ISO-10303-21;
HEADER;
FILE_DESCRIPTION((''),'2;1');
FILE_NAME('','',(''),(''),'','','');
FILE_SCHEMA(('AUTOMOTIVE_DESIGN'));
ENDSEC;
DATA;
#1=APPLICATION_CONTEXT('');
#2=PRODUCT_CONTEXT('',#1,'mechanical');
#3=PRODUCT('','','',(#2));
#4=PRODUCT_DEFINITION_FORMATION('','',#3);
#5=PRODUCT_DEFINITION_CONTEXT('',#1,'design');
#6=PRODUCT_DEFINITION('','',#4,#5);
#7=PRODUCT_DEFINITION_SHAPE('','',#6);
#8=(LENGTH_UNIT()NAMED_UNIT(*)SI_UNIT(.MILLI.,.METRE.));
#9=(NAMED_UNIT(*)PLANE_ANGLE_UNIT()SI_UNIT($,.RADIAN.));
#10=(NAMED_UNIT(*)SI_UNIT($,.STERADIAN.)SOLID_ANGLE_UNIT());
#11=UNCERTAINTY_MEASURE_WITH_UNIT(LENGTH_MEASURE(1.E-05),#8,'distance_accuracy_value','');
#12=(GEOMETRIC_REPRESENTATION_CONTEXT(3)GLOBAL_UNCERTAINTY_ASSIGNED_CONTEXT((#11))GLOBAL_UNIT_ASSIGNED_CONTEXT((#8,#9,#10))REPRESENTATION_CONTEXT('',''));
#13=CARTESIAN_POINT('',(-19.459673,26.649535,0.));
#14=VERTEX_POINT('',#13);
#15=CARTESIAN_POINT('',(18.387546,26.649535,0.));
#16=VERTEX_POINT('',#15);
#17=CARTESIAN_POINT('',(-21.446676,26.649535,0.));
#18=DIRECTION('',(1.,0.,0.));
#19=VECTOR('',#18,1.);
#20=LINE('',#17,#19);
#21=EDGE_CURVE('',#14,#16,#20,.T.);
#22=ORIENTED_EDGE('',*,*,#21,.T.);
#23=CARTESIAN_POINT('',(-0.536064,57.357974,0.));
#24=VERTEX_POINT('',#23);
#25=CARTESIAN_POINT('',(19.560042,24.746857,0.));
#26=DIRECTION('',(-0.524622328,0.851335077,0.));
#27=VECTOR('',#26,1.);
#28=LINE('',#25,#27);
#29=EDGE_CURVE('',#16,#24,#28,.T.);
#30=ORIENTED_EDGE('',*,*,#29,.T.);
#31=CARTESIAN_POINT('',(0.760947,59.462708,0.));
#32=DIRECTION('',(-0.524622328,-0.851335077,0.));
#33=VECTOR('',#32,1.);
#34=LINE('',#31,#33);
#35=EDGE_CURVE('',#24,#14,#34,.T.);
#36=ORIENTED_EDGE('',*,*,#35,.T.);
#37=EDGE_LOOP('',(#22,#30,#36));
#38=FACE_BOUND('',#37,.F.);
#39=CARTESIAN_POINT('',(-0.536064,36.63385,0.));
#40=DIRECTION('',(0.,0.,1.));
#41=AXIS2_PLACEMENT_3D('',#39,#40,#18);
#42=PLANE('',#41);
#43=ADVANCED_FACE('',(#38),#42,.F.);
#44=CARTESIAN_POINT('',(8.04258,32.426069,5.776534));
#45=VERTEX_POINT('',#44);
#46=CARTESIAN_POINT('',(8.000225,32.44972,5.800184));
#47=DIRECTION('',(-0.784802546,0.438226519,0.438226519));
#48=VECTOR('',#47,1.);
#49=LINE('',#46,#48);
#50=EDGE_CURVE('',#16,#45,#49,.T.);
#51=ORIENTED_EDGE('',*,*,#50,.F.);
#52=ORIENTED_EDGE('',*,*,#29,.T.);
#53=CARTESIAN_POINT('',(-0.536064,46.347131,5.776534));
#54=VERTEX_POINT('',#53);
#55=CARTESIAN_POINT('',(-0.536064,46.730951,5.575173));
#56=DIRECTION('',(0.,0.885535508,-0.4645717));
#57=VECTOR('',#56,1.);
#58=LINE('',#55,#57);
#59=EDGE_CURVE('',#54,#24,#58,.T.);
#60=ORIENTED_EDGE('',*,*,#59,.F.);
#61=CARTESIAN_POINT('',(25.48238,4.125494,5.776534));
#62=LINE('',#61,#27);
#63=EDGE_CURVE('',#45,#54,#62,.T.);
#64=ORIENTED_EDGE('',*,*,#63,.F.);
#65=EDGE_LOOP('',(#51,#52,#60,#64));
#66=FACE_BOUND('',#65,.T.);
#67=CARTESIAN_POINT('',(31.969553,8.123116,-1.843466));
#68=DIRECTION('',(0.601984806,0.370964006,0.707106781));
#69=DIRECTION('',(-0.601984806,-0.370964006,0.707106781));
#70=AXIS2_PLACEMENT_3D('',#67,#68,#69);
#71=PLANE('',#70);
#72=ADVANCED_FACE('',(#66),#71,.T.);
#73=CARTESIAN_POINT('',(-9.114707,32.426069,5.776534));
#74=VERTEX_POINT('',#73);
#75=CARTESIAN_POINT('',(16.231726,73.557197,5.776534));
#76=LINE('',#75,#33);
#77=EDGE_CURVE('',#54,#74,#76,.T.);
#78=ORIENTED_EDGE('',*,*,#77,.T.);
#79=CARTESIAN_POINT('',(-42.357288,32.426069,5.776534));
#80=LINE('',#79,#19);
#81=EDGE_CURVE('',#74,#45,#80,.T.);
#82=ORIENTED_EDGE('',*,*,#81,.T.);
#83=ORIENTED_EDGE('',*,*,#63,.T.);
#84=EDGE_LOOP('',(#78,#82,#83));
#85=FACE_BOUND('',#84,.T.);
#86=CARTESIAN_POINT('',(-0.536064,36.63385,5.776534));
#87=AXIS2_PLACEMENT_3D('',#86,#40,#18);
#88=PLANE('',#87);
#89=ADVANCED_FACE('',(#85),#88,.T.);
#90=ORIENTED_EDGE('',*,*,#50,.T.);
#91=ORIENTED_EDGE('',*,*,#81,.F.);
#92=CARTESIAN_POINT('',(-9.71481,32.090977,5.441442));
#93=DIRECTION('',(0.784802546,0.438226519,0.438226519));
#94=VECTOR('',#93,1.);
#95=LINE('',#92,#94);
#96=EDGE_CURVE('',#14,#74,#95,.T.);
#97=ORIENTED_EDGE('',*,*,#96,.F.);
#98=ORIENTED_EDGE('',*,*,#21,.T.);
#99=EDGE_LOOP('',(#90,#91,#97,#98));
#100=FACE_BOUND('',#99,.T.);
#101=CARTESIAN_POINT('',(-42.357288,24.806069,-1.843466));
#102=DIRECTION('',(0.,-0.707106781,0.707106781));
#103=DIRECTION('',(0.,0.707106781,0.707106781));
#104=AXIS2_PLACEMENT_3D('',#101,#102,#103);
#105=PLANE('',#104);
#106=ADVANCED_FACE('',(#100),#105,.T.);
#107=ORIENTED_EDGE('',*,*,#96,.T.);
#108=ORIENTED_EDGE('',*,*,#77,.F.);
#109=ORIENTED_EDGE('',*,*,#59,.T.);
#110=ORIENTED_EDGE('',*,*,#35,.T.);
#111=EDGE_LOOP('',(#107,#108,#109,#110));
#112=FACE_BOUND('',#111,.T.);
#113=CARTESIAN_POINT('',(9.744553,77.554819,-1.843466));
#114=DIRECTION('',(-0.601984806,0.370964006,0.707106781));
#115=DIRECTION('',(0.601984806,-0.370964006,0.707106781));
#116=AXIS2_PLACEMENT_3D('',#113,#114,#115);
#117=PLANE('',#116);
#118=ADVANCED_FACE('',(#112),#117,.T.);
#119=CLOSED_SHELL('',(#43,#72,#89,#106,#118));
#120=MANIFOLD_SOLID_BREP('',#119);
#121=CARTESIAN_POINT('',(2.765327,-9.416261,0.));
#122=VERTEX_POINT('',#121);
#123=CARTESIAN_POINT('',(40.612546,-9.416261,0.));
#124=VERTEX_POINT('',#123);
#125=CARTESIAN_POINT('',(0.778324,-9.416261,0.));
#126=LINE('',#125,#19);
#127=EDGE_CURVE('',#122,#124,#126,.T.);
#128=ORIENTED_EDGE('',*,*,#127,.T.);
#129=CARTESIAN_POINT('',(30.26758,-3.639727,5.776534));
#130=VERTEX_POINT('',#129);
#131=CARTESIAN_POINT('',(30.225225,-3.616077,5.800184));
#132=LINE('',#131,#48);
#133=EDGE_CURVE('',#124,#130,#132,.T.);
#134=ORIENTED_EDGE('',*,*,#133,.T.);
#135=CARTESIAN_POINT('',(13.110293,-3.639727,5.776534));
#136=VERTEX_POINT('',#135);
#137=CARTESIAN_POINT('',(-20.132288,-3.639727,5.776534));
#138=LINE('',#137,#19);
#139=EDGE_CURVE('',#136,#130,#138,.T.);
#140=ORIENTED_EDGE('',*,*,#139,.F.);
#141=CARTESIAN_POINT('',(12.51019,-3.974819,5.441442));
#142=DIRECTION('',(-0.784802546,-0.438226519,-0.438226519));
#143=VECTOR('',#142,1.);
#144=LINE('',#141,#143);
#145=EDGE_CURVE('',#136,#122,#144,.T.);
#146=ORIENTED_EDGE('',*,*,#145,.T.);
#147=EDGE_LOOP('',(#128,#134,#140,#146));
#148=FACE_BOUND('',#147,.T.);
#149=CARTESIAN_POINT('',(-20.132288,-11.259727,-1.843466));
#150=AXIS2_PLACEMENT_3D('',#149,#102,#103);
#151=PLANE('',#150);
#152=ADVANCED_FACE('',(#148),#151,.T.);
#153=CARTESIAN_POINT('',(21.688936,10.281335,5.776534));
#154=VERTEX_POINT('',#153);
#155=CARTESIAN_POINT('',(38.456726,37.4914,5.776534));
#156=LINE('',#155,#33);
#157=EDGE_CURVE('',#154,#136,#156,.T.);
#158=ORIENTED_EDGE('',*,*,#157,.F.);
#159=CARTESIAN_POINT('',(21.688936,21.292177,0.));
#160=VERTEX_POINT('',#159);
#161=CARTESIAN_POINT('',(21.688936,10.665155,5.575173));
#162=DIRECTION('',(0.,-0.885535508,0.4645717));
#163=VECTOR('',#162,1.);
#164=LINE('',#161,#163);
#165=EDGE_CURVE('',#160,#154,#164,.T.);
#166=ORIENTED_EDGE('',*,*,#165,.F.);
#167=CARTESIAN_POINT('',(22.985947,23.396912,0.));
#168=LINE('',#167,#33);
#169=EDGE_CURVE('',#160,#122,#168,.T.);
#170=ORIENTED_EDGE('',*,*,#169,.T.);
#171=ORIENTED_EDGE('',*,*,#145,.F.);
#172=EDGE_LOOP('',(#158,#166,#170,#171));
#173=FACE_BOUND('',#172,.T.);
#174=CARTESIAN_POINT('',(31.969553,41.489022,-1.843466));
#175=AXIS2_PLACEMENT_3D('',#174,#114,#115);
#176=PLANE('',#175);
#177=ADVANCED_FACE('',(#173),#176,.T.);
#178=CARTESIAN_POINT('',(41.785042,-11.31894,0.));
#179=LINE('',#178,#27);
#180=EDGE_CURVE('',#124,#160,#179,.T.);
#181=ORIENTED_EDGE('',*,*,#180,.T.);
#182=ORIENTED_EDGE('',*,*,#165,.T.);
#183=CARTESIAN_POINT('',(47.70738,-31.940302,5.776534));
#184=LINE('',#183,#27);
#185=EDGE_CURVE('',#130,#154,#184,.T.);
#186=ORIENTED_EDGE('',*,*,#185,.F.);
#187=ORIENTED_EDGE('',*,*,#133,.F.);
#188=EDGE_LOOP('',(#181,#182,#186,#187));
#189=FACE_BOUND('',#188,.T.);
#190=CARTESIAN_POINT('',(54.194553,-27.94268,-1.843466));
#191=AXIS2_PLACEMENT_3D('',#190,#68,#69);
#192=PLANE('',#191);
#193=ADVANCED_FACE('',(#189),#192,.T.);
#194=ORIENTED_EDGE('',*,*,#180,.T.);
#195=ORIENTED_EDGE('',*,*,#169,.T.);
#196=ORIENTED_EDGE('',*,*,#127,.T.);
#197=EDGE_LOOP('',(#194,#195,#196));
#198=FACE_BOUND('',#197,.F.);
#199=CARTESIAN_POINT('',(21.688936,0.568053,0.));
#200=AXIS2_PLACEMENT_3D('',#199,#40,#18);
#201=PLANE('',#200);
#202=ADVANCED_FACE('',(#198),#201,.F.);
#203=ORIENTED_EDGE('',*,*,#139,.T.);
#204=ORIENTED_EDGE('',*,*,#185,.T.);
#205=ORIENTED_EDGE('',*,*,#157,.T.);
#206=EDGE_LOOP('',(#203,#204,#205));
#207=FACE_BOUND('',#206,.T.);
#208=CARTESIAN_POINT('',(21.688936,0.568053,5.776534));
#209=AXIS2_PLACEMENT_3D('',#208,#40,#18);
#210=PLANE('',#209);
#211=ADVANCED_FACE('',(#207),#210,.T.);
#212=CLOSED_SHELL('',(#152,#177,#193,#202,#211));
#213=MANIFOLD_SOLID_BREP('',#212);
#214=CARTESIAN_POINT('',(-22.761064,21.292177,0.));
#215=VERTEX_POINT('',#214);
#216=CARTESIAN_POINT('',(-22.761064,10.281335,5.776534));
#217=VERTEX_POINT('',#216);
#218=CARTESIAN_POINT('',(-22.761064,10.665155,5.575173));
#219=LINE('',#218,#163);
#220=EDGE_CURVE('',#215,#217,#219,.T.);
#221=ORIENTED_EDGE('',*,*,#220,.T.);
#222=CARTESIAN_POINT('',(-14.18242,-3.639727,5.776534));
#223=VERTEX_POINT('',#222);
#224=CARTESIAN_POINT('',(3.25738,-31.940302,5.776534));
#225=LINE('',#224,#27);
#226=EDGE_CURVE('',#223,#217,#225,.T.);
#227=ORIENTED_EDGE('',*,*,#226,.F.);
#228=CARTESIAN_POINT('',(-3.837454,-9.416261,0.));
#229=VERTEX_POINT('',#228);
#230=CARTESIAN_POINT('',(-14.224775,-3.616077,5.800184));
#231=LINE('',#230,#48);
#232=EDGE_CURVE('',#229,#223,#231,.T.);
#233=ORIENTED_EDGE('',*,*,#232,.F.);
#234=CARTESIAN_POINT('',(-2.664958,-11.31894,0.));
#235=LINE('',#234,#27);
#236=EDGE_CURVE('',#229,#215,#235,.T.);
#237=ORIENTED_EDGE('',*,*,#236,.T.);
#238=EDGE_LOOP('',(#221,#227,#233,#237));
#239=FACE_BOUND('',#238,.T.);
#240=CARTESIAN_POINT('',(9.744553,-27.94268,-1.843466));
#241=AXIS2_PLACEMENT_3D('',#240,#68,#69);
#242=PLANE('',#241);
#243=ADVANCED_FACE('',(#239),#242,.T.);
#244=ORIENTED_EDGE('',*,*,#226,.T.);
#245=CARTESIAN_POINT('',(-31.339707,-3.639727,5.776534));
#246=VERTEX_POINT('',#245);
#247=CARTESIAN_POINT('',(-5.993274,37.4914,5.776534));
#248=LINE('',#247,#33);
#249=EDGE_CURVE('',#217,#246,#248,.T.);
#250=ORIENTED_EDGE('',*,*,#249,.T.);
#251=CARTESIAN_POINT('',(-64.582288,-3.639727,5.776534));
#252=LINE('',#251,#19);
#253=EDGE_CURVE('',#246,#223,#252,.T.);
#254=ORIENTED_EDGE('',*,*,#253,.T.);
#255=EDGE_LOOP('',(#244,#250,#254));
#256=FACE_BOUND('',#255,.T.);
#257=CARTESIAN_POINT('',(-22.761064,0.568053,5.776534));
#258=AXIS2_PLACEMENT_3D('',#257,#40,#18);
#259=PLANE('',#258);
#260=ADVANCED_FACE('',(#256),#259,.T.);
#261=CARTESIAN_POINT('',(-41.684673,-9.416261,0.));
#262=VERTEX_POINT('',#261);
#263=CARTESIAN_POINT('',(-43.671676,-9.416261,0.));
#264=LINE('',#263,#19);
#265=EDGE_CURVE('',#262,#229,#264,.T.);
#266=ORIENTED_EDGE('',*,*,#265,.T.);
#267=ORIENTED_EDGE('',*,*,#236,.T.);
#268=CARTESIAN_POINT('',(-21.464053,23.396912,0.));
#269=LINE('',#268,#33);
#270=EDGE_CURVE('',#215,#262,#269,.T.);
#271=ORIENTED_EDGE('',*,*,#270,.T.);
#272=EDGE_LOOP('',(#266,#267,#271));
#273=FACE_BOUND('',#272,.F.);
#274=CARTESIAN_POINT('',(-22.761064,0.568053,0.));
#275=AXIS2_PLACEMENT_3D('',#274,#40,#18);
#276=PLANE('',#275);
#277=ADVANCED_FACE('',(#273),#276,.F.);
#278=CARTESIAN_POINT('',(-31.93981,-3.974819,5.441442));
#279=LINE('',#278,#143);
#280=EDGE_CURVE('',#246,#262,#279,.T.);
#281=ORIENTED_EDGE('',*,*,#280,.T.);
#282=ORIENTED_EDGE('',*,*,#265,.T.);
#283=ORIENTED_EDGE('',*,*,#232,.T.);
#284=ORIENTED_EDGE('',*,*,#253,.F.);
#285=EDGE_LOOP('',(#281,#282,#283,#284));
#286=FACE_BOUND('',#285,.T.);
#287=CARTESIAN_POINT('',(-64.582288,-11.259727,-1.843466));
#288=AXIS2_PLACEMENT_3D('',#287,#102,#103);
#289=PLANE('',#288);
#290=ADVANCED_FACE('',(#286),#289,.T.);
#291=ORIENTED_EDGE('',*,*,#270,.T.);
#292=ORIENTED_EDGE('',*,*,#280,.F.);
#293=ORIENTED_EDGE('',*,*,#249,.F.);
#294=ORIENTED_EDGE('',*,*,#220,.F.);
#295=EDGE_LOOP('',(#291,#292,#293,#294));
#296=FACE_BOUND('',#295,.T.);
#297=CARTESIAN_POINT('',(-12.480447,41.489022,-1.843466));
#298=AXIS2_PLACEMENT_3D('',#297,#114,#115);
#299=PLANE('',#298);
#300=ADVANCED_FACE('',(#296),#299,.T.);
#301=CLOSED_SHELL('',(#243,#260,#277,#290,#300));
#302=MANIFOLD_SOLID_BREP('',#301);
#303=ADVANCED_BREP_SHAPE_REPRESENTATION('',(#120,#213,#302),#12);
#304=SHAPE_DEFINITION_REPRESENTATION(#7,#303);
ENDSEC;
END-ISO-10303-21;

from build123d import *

# Parameters (mm, degrees)
F1_DEPTH      = 5.776533857
F2_T1_DEPTH   = 83.6424487366
F2_T3_DEPTH   = 81.5562575155
F2_T5_DEPTH   = 81.5562575155
F2_2_T1_DEPTH = 83.6424487366
F2_2_T3_DEPTH = 81.5562575155
F2_2_T5_DEPTH = 81.5562575155
F2_3_T1_DEPTH = 81.5562575155
F2_3_T3_DEPTH = 83.6424487366
F2_3_T5_DEPTH = 81.5562575155


# Not quite as in the source:
# - a fillet or chamfer that OpenCascade refuses, or shapes differently, is made with other operations: its cross-section is extruded or revolved along the edge and cut away or added


with BuildPart() as f1:
    # F0 (on Top) → F1 (new body)
    with BuildSketch(Plane.XY):
        Polygon((21.688936314, 24.8060692102), (-0.536063686, -11.25972718), (43.913936314, -11.25972718), align=None)
    extrude(amount=F1_DEPTH)

    # F2: chamfer of 7.62 on 3 edges, made by hand

    # F2_s2 → F2_t1 (cut)
    with BuildSketch(Plane.YZ.offset(-20.1322880543)):
        Polygon((-11.25972718, -1.843466143), (-3.63972718, 5.776533857), (-11.25972718, 5.776533857), align=None)
    extrude(amount=F2_T1_DEPTH, mode=Mode.SUBTRACT)

    # F2_s4 → F2_t3 (cut)
    with BuildSketch(Plane(origin=(27.3959125979, -44.4569361385, 0), x_dir=(0, 0, 1), z_dir=(-0.5246223284, 0.8513350766, 0))):
        Polygon((-1.843466143, 31.478370044), (5.776533857, 23.858370044), (5.776533857, 31.478370044), align=None)
    extrude(amount=F2_T3_DEPTH, mode=Mode.SUBTRACT)

    # F2_s6 → F2_t5 (cut)
    with BuildSketch(Plane(origin=(27.3291517213, 44.3485993924, 0), x_dir=(0, 0, 1), z_dir=(-0.5246223284, -0.8513350766, 0))):
        Polygon((-1.843466143, -5.4507344708), (5.776533857, -13.0707344708), (5.776533857, -5.4507344708), align=None)
    extrude(amount=F2_T5_DEPTH, mode=Mode.SUBTRACT)


with BuildPart() as f1b:
    # F0 (on Top) → F1, piece 2 (new body)
    with BuildSketch(Plane.XY):
        Polygon((-22.761063686, 24.8060692102), (-44.986063686, -11.25972718), (-0.536063686, -11.25972718), align=None)
    extrude(amount=F1_DEPTH)

    # F2#2: chamfer of 7.62 on 3 edges, made by hand

    # F2_2_s2 → F2_2_t1 (cut)
    with BuildSketch(Plane.YZ.offset(-64.5822880543)):
        Polygon((-11.25972718, -1.843466143), (-3.63972718, 5.776533857), (-11.25972718, 5.776533857), align=None)
    extrude(amount=F2_2_T1_DEPTH, mode=Mode.SUBTRACT)

    # F2_2_s4 → F2_2_t3 (cut)
    with BuildSketch(Plane(origin=(15.1620018871, -24.6042597493, 0), x_dir=(0, 0, 1), z_dir=(-0.5246223284, 0.8513350766, 0))):
        Polygon((-1.843466143, -6.3634741091), (5.776533857, -13.9834741091), (5.776533857, -6.3634741091), align=None)
    extrude(amount=F2_2_T3_DEPTH, mode=Mode.SUBTRACT)

    # F2_2_s6 → F2_2_t5 (cut)
    with BuildSketch(Plane(origin=(15.0952410105, 24.4959230032, 0), x_dir=(0, 0, 1), z_dir=(-0.5246223284, -0.8513350766, 0))):
        Polygon((-1.843466143, 32.3911096823), (5.776533857, 24.7711096823), (5.776533857, 32.3911096823), align=None)
    extrude(amount=F2_2_T5_DEPTH, mode=Mode.SUBTRACT)


with BuildPart() as f1c:
    # F0 (on Top) → F1, piece 3 (new body)
    with BuildSketch(Plane.XY):
        Polygon((-0.536063686, 60.8718656003), (-22.761063686, 24.8060692102), (21.688936314, 24.8060692102), align=None)
    extrude(amount=F1_DEPTH)

    # F2#3: chamfer of 7.62 on 3 edges, made by hand

    # F2_3_s2 → F2_3_t1 (cut)
    with BuildSketch(Plane(origin=(37.3202410105, 60.5617193934, 0), x_dir=(0, 0, 1), z_dir=(-0.5246223284, -0.8513350766, 0))):
        Polygon((-1.843466143, 32.3911096823), (5.776533857, 24.7711096823), (5.776533857, 32.3911096823), align=None)
    extrude(amount=F2_3_T1_DEPTH, mode=Mode.SUBTRACT)

    # F2_3_s4 → F2_3_t3 (cut)
    with BuildSketch(Plane.YZ.offset(-42.3572880543)):
        Polygon((24.8060692102, -1.843466143), (32.4260692102, 5.776533857), (24.8060692102, 5.776533857), align=None)
    extrude(amount=F2_3_T3_DEPTH, mode=Mode.SUBTRACT)

    # F2_3_s6 → F2_3_t5 (cut)
    with BuildSketch(Plane(origin=(5.1709125979, -8.3911397483, 0), x_dir=(0, 0, 1), z_dir=(-0.5246223284, 0.8513350766, 0))):
        Polygon((-1.843466143, 31.478370044), (5.776533857, 23.858370044), (5.776533857, 31.478370044), align=None)
    extrude(amount=F2_3_T5_DEPTH, mode=Mode.SUBTRACT)


solid = Compound([f1.part, f1b.part, f1c.part])
